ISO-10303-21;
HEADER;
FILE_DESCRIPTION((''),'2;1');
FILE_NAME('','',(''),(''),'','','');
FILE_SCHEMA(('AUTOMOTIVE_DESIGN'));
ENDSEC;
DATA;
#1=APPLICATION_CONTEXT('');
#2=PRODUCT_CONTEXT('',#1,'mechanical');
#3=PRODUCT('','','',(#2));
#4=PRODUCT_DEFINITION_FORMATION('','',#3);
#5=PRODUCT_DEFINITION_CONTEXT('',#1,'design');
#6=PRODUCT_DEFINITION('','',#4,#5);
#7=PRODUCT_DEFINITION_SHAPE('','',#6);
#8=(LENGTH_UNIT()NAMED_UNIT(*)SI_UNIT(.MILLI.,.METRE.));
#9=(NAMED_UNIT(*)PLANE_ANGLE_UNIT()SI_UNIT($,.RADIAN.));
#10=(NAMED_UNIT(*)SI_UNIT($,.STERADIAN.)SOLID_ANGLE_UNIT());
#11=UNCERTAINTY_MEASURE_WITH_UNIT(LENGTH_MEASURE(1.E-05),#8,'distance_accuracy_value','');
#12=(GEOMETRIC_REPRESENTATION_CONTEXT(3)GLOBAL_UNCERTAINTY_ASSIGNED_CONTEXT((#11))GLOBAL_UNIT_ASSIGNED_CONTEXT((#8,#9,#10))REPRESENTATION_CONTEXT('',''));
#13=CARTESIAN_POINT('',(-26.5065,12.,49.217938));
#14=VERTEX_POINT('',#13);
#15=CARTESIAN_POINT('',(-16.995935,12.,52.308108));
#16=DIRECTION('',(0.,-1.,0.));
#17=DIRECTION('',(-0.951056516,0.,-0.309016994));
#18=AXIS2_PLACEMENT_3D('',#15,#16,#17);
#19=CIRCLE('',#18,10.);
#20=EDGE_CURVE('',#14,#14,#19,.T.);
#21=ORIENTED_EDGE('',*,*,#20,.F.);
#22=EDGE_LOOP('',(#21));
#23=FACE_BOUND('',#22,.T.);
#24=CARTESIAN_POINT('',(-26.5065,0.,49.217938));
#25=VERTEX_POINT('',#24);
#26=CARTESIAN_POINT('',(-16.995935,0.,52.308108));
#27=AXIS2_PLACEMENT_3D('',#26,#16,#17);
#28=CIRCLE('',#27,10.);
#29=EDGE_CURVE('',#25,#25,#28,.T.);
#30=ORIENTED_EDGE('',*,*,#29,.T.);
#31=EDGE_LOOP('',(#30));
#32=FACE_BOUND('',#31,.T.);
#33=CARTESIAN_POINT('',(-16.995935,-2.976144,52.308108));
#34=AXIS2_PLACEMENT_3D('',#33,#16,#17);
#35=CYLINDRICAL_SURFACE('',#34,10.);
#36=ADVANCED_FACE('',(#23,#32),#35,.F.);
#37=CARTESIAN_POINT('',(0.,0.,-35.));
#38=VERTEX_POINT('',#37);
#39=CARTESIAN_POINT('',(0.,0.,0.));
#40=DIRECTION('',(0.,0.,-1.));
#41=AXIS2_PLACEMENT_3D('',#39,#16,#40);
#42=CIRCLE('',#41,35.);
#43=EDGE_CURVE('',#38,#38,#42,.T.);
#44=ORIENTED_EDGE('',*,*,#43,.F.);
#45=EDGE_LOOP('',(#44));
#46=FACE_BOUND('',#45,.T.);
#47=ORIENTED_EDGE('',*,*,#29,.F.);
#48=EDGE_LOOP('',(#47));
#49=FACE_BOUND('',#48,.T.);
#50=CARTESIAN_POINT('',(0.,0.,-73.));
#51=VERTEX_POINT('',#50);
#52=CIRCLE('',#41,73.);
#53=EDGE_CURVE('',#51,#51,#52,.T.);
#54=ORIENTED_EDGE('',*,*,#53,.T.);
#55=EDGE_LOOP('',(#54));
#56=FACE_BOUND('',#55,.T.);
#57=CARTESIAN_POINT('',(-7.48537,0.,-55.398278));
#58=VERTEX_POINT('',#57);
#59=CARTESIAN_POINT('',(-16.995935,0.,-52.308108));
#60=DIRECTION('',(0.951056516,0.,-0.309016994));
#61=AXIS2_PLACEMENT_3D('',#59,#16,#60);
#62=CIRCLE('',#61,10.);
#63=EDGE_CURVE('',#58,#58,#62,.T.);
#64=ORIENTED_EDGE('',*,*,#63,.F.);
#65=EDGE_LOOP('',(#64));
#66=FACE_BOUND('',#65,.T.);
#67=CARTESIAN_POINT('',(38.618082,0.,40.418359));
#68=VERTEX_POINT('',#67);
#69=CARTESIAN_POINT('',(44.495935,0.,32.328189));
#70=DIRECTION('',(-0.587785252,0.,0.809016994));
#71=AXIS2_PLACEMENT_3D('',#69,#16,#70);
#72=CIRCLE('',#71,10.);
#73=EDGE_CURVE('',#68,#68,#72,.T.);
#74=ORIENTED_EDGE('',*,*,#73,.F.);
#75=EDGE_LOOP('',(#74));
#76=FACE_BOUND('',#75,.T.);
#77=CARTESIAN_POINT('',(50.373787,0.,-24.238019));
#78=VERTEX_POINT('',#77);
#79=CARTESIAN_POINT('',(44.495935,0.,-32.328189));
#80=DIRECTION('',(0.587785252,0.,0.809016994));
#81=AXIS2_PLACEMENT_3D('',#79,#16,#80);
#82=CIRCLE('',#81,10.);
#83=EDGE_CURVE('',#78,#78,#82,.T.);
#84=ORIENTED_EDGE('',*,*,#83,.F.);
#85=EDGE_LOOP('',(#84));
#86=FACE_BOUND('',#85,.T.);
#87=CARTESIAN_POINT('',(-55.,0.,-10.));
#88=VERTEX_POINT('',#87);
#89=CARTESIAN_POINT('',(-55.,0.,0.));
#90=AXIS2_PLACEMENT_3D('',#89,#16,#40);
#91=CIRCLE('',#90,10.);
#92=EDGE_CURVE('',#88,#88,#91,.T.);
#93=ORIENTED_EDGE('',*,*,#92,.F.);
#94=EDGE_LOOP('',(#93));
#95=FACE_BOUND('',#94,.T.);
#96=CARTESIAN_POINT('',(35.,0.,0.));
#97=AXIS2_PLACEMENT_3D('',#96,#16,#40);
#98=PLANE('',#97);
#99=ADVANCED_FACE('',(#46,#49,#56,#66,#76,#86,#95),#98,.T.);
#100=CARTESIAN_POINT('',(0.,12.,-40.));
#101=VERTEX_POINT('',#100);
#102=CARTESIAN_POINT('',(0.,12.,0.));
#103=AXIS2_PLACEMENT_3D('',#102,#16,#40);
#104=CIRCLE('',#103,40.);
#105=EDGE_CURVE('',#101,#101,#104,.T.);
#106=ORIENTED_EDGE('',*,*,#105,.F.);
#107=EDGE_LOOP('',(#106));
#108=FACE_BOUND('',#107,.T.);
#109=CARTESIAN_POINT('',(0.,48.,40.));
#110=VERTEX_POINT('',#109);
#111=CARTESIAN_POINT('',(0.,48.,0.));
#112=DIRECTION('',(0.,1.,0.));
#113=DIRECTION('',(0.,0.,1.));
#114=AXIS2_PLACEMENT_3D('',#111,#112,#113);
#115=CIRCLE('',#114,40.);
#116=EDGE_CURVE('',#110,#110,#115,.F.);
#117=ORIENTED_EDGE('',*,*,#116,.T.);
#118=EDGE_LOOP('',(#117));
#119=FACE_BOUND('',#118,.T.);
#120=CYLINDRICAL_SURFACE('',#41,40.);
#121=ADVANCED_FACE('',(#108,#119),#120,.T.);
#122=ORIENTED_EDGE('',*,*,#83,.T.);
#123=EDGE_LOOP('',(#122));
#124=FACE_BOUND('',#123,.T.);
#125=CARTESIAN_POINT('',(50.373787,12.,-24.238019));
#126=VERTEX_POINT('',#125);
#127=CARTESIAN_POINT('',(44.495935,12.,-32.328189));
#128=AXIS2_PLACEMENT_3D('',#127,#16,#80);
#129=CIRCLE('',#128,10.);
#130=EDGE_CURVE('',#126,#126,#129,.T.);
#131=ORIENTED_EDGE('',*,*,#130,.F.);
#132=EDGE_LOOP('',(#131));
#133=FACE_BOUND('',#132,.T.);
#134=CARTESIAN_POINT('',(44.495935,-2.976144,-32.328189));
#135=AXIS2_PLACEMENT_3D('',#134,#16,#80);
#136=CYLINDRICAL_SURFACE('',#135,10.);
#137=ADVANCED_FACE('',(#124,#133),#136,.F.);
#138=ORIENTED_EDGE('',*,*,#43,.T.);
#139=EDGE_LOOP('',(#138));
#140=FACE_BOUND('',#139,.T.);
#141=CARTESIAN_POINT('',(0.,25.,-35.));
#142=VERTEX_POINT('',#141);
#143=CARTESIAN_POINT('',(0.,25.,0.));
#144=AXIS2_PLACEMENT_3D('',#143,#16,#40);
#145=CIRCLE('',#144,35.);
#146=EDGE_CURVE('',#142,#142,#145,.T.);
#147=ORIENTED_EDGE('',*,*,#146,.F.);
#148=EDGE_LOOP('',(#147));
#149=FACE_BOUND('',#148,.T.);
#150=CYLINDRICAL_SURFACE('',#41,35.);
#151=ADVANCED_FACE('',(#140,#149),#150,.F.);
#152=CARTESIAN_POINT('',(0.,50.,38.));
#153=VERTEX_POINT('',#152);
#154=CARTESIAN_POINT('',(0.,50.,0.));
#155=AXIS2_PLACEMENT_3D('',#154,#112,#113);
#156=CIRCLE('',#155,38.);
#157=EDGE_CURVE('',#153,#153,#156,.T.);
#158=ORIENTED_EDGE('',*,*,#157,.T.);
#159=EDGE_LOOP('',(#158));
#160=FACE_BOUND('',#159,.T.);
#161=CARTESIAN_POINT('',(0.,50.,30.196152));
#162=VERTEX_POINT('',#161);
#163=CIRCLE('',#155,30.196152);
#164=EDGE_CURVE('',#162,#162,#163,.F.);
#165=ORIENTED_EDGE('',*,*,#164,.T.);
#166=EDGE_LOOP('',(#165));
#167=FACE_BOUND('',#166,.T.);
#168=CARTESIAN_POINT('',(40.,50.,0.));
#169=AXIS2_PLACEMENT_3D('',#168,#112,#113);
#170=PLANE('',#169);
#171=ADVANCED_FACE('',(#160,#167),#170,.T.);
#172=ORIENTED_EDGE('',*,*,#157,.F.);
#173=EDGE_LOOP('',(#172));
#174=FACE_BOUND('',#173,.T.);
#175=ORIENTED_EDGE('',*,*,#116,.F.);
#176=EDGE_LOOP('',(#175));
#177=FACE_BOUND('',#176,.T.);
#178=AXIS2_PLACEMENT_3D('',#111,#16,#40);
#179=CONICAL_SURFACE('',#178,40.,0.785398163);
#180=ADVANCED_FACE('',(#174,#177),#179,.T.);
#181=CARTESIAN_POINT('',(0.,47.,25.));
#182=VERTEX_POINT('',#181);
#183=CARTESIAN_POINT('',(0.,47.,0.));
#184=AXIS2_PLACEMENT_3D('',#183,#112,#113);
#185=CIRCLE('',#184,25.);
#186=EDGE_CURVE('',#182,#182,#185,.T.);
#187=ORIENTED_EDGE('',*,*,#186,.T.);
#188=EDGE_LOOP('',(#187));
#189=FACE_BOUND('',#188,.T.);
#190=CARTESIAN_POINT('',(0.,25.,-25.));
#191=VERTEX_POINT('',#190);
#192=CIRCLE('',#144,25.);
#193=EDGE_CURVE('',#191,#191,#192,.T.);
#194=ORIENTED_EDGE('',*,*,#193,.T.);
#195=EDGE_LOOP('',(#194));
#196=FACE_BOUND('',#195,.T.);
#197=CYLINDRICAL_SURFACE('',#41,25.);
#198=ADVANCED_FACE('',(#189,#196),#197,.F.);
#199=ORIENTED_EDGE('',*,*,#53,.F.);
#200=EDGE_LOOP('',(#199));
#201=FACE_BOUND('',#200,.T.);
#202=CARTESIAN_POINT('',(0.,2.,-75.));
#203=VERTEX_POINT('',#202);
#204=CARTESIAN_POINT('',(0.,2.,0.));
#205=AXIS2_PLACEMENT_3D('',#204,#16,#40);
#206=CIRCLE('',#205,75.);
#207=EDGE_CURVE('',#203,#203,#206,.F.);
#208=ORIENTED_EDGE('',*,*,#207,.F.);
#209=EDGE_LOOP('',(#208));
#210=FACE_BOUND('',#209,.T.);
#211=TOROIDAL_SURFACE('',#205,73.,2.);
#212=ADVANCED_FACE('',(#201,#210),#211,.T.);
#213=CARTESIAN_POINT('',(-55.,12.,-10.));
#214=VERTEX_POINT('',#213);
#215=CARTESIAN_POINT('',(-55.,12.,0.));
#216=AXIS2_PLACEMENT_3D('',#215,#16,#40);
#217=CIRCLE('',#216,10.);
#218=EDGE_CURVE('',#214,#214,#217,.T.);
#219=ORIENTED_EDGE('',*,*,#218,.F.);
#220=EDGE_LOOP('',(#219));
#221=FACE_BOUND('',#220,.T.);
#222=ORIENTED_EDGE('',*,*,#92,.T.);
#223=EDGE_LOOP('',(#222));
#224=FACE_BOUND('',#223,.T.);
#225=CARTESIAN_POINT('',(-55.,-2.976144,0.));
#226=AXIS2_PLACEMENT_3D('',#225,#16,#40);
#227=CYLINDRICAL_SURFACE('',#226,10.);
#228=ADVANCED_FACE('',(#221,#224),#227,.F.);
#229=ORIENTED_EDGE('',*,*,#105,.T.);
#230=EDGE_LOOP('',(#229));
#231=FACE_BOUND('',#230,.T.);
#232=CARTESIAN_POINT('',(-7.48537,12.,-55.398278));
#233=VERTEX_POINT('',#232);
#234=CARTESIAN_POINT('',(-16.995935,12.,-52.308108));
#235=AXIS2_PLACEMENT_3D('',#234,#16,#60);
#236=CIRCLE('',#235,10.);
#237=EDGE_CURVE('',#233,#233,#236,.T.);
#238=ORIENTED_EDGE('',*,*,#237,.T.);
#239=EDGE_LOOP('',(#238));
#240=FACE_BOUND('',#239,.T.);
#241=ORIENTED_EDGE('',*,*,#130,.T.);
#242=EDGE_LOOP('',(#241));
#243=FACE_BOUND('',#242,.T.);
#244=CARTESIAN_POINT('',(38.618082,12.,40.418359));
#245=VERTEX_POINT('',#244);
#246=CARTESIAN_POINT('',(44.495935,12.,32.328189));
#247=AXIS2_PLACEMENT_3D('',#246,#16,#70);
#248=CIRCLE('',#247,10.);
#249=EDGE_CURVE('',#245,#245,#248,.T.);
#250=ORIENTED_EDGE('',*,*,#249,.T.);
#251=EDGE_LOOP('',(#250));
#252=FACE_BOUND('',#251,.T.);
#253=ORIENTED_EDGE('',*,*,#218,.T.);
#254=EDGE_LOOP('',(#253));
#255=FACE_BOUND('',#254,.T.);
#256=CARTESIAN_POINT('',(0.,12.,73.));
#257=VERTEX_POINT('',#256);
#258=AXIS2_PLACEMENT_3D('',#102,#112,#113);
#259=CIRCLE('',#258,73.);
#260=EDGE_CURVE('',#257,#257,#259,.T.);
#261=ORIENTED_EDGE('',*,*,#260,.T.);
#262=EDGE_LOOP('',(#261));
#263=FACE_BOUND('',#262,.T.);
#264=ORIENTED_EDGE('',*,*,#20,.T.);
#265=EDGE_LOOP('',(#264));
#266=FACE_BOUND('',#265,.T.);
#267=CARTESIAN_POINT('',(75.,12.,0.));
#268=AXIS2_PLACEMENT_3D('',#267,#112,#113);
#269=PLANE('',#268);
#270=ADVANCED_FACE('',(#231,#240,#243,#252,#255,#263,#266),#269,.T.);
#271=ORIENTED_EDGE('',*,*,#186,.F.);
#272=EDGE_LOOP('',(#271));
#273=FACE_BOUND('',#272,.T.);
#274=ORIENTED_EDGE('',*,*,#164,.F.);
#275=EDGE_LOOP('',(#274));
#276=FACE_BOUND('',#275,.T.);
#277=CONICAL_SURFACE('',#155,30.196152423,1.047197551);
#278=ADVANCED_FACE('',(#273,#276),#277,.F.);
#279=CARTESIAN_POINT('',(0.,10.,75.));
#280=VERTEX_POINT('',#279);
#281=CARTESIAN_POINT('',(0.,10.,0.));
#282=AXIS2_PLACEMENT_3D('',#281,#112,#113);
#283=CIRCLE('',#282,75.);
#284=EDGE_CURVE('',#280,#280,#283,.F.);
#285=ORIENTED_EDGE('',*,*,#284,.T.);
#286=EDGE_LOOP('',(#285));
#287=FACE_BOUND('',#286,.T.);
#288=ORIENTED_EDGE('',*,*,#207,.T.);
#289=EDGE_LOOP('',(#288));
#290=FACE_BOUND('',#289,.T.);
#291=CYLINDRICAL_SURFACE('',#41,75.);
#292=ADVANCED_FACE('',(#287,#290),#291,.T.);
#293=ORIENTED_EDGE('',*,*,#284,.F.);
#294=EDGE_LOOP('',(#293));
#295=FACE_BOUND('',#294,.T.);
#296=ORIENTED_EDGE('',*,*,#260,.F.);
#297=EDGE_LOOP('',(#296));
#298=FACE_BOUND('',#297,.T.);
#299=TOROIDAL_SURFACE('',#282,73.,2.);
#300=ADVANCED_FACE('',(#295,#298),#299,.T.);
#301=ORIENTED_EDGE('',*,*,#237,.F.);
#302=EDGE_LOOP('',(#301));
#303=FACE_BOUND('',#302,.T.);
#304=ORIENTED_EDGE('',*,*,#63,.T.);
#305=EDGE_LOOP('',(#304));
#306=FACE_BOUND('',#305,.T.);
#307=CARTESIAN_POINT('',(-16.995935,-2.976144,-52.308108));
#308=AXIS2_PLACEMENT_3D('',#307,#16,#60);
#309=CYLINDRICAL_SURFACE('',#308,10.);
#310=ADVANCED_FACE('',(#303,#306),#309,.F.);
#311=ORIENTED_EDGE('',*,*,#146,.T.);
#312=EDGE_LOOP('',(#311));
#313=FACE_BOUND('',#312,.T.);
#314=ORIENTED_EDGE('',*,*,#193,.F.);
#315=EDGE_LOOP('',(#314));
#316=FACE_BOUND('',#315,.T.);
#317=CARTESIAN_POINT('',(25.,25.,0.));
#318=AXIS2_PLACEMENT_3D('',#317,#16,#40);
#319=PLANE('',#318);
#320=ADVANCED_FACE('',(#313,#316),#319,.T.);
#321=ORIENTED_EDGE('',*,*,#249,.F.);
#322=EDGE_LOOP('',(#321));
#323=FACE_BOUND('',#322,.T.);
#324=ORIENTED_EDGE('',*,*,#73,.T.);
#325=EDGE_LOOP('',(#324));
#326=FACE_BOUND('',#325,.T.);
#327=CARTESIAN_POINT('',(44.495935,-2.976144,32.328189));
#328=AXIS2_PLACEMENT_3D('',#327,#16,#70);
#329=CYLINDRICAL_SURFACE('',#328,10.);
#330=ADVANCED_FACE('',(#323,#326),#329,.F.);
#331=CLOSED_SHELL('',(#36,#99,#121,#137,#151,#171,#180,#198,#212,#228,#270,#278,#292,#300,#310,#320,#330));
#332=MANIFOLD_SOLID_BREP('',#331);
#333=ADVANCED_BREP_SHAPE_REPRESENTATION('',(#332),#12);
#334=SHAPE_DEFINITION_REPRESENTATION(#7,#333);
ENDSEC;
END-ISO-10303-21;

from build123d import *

# Parameters (mm, degrees)
SKETCH_2_W               = 10
SKETCH_2_H               = 12
PATTERN_CIRCULAR_1_COUNT = 5
FILLET_1_R               = 2
CHAMFER_1_SIZE           = 2


with BuildPart() as part:
    # Эскиз1 → Повернуть1 (revolve)
    with BuildSketch(Plane.XY, mode=Mode.PRIVATE) as revolve_1_sk:
        Polygon((35, 0), (75, 0), (75, 12), (40, 12), (40, 50), (25, 50), (25, 25), (35, 25), align=None)
    revolve(revolve_1_sk.sketch.rotate(Axis((0, 0, 0), (0, 1, 0)), 90), axis=Axis((0, 0, 0), (0, 1, 0)))

    # Эскиз2 → Вырез-Повернуть1 (revolve, cut)
    with BuildSketch(Plane.XY, mode=Mode.PRIVATE) as cut_revolve_1_sk:
        with Locations((-60, 6)):
            Rectangle(SKETCH_2_W, SKETCH_2_H)
    cut_revolve_1 = revolve(cut_revolve_1_sk.sketch.rotate(Axis((-55, -2.976144308, 0), (0, 1, 0)), 270), axis=Axis((-55, -2.976144308, 0), (0, 1, 0)), mode=Mode.SUBTRACT)

    # Круговой массив1: Вырез-Повернуть1 ×5 about axis
    pattern_circular_1_axis = Axis((0, 0, 0), (0, 1, 0))
    for i in range(1, PATTERN_CIRCULAR_1_COUNT):
        add(cut_revolve_1.rotate(pattern_circular_1_axis, i * 360 / PATTERN_CIRCULAR_1_COUNT), mode=Mode.SUBTRACT)

    # Скругление1
    fillet_1_edges = [part.edges().sort_by_distance(p)[0] for p in [
        (0, 12, 75),
        (0, 0, 75),
    ]]
    fillet(fillet_1_edges, radius=FILLET_1_R)

    # Фаска1
    chamfer_1_edges = [part.edges().sort_by_distance(p)[0] for p in [
        (0, 50, 40),
    ]]
    chamfer(chamfer_1_edges, length=CHAMFER_1_SIZE)

    # Фаска2: read off the stored shape, not the designer's step
    # Фаска2 outline → Фаска2 (revolve, cut)
    with BuildSketch(Plane.XY):
        Polygon((25, 50), (25, 47), (30.196152423, 50), align=None)
    revolve(axis=Axis((0, 0, 0), (0, 1, 0)), mode=Mode.SUBTRACT)


solid = part.part
